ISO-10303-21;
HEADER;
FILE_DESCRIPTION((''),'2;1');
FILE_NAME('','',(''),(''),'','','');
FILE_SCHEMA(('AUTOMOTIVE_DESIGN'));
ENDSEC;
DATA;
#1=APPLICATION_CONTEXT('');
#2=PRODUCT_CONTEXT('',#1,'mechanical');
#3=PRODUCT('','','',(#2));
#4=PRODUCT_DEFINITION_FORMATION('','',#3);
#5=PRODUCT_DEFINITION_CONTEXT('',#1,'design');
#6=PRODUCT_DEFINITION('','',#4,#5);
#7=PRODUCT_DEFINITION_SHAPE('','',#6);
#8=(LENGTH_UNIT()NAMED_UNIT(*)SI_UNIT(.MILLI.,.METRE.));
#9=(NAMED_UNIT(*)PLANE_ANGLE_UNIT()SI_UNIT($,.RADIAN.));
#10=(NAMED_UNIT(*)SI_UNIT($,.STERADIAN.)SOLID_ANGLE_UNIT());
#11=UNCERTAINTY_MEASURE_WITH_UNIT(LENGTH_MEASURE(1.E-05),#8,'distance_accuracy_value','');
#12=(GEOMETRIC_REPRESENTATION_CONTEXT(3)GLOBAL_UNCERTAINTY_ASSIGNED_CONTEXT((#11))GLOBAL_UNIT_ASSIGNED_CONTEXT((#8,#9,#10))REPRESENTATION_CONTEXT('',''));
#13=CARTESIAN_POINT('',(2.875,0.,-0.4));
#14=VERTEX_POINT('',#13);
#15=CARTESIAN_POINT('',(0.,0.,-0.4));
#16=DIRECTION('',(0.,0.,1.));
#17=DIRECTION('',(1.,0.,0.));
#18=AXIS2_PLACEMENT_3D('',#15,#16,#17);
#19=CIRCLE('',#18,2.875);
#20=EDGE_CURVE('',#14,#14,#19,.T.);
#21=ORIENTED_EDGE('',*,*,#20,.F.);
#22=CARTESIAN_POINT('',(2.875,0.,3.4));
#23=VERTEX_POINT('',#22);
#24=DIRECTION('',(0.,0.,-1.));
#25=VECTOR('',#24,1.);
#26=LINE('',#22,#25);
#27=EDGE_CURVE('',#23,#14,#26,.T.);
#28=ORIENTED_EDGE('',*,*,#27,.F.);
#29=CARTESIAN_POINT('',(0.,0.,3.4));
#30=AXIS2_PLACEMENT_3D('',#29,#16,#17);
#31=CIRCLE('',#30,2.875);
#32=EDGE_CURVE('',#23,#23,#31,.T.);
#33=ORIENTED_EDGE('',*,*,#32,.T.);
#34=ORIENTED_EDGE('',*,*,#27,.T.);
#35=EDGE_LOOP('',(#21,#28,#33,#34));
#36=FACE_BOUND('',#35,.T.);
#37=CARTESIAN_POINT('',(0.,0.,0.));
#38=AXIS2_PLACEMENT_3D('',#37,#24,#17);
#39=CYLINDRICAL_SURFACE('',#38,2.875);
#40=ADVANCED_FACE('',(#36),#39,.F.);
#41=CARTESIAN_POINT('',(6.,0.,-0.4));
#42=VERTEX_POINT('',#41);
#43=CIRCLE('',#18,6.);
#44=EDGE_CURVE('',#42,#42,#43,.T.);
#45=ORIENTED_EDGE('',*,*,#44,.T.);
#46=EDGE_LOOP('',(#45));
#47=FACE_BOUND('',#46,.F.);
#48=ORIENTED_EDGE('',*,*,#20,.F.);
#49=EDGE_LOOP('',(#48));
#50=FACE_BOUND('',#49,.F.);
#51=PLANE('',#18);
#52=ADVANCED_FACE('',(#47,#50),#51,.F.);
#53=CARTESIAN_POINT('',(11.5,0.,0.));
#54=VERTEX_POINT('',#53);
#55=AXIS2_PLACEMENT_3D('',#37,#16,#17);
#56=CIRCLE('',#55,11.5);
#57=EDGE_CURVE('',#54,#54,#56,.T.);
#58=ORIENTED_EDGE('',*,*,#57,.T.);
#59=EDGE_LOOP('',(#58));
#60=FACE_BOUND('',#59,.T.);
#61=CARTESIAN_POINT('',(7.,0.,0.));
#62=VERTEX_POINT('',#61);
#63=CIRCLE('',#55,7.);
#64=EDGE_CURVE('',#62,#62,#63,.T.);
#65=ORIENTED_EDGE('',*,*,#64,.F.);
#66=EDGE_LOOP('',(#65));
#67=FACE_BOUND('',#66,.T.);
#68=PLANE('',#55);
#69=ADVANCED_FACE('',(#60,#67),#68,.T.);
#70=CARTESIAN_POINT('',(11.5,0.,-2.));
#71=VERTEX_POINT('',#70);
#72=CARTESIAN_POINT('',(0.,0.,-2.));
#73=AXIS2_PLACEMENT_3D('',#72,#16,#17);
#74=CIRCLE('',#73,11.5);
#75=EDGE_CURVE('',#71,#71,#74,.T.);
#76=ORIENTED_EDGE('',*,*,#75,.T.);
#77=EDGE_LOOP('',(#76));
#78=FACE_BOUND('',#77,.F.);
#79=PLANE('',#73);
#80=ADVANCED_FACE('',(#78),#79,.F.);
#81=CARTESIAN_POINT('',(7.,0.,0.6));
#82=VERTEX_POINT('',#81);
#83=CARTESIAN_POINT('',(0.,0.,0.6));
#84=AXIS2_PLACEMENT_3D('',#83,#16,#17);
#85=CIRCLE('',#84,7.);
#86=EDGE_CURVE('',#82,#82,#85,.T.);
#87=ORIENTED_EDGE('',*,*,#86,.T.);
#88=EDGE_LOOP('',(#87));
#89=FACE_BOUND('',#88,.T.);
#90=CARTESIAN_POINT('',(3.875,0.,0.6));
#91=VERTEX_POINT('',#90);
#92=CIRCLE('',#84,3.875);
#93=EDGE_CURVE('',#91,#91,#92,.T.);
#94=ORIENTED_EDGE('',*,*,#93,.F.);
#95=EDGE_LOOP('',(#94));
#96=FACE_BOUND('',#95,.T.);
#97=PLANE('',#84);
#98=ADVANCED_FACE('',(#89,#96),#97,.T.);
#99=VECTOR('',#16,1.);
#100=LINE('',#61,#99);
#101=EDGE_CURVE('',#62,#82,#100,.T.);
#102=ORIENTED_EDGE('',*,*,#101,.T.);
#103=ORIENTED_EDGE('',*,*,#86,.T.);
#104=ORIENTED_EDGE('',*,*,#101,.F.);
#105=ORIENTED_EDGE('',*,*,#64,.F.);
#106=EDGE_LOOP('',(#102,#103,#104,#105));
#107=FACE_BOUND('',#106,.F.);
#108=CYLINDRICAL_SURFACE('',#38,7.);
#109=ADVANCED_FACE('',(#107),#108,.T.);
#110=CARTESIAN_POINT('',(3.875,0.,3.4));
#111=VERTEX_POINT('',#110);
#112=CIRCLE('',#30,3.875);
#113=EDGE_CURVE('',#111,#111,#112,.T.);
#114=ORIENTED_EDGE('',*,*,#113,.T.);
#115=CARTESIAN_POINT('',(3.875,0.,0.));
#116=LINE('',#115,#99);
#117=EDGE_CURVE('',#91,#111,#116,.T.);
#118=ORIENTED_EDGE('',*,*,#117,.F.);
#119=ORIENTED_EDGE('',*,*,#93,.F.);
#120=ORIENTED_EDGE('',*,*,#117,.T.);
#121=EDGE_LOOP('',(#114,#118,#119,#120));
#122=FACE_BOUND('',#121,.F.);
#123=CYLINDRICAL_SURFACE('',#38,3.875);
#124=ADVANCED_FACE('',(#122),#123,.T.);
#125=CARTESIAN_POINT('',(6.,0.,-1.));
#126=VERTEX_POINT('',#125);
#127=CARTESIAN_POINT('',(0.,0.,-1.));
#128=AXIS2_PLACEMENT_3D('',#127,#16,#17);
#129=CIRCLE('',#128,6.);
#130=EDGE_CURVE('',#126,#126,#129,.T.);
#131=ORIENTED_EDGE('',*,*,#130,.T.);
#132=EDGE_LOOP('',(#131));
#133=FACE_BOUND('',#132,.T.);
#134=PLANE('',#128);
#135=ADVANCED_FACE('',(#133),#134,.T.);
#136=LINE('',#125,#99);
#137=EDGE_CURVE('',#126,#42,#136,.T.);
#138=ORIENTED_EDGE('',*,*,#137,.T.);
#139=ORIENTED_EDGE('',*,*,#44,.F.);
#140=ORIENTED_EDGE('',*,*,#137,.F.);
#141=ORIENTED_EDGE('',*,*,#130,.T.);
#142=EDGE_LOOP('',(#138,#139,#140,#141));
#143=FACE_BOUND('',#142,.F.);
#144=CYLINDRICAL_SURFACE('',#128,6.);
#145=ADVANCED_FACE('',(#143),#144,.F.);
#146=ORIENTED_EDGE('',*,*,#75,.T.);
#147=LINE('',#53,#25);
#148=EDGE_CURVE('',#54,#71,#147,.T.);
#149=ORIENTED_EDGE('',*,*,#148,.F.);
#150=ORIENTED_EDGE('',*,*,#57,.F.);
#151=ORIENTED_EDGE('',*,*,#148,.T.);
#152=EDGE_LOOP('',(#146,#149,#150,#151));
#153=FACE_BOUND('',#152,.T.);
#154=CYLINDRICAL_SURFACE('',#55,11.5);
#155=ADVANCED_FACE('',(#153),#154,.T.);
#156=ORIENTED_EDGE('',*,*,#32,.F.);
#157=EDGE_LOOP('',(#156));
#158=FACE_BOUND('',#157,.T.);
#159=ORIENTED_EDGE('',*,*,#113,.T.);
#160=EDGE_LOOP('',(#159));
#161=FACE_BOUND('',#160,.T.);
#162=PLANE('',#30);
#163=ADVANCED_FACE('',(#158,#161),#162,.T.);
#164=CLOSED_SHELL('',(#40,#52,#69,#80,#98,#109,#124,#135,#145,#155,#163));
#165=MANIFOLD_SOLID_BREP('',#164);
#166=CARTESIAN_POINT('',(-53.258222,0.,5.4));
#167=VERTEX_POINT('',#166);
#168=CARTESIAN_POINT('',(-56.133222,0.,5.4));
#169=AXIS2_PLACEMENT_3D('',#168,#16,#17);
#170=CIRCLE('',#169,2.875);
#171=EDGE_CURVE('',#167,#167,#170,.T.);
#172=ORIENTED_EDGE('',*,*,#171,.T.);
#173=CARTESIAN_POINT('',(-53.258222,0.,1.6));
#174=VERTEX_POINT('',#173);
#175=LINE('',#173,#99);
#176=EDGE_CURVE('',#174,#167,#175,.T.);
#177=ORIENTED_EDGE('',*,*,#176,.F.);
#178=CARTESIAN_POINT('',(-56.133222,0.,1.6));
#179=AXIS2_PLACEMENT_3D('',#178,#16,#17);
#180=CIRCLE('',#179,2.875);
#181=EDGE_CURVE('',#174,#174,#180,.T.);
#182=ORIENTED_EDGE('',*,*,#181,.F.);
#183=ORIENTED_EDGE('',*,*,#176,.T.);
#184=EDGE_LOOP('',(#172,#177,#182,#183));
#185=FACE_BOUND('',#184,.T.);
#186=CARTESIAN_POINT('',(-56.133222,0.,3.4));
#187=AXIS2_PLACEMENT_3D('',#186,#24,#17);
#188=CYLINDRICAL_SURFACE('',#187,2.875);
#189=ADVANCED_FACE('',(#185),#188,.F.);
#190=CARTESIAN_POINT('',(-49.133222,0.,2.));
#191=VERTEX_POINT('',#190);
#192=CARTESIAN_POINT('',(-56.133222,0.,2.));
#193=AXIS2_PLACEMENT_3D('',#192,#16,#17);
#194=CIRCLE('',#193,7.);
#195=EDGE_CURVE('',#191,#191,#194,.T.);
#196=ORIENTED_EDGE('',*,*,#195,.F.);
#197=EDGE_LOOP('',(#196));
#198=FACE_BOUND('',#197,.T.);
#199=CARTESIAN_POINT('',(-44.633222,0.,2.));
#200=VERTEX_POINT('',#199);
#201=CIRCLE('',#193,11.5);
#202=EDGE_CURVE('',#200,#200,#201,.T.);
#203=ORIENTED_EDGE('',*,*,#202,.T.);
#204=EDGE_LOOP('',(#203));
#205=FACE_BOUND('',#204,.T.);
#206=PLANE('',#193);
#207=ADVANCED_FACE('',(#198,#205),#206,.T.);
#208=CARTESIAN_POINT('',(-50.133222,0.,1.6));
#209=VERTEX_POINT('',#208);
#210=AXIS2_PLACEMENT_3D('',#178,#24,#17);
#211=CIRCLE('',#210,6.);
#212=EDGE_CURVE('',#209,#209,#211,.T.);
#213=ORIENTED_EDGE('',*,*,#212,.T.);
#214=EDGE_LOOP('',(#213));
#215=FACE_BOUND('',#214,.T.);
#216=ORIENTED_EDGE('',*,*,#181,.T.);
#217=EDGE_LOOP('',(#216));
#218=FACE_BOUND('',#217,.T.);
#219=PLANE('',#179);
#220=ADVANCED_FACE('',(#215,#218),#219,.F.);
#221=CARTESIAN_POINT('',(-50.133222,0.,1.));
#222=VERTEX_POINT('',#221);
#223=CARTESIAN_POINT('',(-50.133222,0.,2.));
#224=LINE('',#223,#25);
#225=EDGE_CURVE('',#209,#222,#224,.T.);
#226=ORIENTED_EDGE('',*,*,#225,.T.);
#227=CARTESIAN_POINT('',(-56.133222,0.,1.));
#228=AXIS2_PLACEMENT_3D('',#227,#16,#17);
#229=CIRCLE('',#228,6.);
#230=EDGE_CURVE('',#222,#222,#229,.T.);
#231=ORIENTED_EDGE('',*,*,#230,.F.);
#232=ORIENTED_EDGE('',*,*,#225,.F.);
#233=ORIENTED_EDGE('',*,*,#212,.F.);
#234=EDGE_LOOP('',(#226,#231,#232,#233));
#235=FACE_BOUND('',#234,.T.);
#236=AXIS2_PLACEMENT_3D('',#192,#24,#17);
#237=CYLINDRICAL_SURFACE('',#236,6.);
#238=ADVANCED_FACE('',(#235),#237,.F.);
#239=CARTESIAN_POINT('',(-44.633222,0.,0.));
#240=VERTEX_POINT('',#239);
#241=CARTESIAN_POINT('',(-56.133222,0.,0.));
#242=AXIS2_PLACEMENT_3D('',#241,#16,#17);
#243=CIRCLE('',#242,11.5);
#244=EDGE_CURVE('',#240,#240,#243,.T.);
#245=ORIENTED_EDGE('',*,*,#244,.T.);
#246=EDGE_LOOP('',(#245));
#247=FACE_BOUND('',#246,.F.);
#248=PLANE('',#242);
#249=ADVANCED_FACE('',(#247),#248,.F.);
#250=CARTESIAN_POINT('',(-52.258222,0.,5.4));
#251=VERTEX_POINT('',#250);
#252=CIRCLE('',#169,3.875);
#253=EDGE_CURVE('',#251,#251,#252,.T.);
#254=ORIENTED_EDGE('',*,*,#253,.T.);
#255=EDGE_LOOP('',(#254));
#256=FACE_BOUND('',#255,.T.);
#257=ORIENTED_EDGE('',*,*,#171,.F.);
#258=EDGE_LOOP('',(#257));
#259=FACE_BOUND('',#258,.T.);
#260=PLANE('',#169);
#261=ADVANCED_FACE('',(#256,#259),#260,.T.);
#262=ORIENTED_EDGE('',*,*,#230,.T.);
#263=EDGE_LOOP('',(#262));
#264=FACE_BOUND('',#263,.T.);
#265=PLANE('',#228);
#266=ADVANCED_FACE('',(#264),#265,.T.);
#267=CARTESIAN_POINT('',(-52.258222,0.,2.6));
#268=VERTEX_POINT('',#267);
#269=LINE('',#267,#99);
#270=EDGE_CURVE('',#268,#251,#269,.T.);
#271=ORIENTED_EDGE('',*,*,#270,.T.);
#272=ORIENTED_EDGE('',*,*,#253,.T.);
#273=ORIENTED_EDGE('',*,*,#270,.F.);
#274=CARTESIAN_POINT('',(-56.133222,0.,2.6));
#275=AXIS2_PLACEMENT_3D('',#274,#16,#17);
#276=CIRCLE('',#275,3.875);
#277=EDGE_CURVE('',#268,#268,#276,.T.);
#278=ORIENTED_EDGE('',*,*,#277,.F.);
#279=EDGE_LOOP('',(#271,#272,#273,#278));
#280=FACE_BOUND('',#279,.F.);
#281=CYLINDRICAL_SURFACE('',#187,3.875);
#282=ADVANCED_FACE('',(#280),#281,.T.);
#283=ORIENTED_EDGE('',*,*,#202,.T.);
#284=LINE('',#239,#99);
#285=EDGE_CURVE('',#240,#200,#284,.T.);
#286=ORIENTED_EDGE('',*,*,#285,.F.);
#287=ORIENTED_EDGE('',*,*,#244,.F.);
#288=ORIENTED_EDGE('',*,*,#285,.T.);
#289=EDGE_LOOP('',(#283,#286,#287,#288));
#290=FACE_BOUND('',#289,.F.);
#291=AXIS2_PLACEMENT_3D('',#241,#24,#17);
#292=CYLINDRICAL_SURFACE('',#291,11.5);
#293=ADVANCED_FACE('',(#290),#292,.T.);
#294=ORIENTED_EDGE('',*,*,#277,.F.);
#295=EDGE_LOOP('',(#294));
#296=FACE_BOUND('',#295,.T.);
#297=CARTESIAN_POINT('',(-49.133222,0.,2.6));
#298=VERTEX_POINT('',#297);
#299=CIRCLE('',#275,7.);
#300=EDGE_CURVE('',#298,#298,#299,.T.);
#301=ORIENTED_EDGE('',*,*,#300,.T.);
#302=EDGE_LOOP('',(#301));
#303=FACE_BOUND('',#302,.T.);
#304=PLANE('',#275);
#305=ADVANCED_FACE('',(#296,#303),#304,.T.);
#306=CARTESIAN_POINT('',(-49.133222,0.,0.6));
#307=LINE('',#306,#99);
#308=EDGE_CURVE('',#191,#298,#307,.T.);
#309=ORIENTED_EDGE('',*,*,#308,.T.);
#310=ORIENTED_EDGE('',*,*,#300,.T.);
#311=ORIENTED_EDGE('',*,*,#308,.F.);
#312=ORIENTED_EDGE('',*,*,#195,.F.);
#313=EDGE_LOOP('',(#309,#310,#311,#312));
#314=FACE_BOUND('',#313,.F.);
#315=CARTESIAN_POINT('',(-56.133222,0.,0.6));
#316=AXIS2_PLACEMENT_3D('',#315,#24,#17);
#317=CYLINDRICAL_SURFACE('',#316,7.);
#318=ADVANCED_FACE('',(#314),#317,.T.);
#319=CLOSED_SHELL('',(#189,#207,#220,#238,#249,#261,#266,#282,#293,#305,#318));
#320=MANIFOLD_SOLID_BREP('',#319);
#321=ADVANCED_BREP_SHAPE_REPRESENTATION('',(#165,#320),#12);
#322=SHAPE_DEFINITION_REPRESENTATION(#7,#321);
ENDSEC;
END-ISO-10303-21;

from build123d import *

# Parameters (mm, degrees)
F0_R        = 3.875
F1_DEPTH    = 3.4
F0_R_2      = 7
F2_DEPTH    = 0.6
F0_R_3      = 11.5
F3_DEPTH    = 2
F4_T        = 1
F5_R        = 3.875
F6_DEPTH    = 3.4
F5_R_2      = 7
F7_DEPTH    = 0.6
F6_FACE_R   = 3.875
F7_FACE_R   = 7
F7_FACE_R_2 = 3.875
F5_R_3      = 11.5
F8_DEPTH    = 2
F9_T        = 1


# Not quite as in the source:
# - a shell that OpenCascade refuses in one call is made with other operations: the cavity is built on its own and cut out


with BuildPart() as f1:
    # F0 (on Top) → F1 (new body)
    with BuildSketch(Plane.XY):
        Circle(F0_R)
    extrude(amount=F1_DEPTH)

    # F0 (on Top) → F2 (join)
    with BuildSketch(Plane.XY):
        Circle(F0_R_2)
        Circle(F0_R, mode=Mode.SUBTRACT)
    extrude(amount=F2_DEPTH)

    # F0 (on Top) → F3 (join)
    with BuildSketch(Plane.XY):
        Circle(F0_R_3)
        Circle(F0_R_2, mode=Mode.SUBTRACT)
        Circle(F0_R_2)
        Circle(F0_R, mode=Mode.SUBTRACT)
        Circle(F0_R)
    extrude(amount=-F3_DEPTH)

    # F4: shell of thickness 1, made by hand


with BuildPart() as f4_core1:
    # F4_t2: copy of F1
    add(f1.part)

    # the walls: a layer under each face that stays
    f4_faces = [f4_core1.faces().sort_by_distance(p)[0] for p in [
        (-11.5, 0, -1),
        (-7.6666666667, -7.6666666667, 0),
        (0, 0, -2),
        (-7, 0, 0.3),
        (-4.6666666667, -4.6666666667, 0.6),
        (-3.875, 0, 2),
    ]]
    thicken(f4_faces, amount=-F4_T, mode=Mode.SUBTRACT)

    # F4_s3 → F4_t4 (revolve, cut)
    with BuildSketch(Plane.XZ):
        Polygon((7.01, 0.01), (7, -1), (6, -1), (6, 0), align=None)
    revolve(axis=Axis((0, 0, 0), (0, 0, 1)), mode=Mode.SUBTRACT)

    # F4_s5 → F4_t6 (revolve, cut)
    with BuildSketch(Plane.XZ):
        Polygon((3.885, 0.61), (3.875, -0.4), (2.875, -0.4), (2.875, 0.6), align=None)
    revolve(axis=Axis((0, 0, 0.6), (0, 0, 1)), mode=Mode.SUBTRACT)


with BuildPart() as f1_1:
    add(f1.part)

    # what is left inside the walls is the cavity
    f4_cavity = [f4_core1.part.solids().sort_by_distance(p)[0] for p in [
        (0, -2, -0.99),
    ]]
    add(f4_cavity, mode=Mode.SUBTRACT)


with BuildPart() as f6:
    # F5 (on Top) → F6 (new body)
    with BuildSketch(Plane.XY):
        with Locations((-56.1332218349, 0)):
            Circle(F5_R)
    extrude(amount=F6_DEPTH)

    # F5 (on Top) → F7 (join)
    with BuildSketch(Plane.XY):
        with Locations((-56.1332218349, 0)):
            Circle(F5_R_2)
        with Locations((-56.1332218349, 0)):
            Circle(F5_R, mode=Mode.SUBTRACT)
    extrude(amount=F7_DEPTH)

    # F6_face (on face) + F7_face (on face) + F5 (on Top) → F8 (join)
    with BuildSketch(Plane(origin=(-56.1332218349, 0, 3.4), x_dir=(1, 0, 0), z_dir=(0, 0, 1))):
        Circle(F6_FACE_R)
    with BuildSketch(Plane(origin=(-56.1332218349, 0, 0.6), x_dir=(1, 0, 0), z_dir=(0, 0, 1))):
        Circle(F7_FACE_R)
        Circle(F7_FACE_R_2, mode=Mode.SUBTRACT)
    with BuildSketch(Plane.XY):
        with Locations((-56.1332218349, 0)):
            Circle(F5_R_3)
        with Locations((-56.1332218349, 0)):
            Circle(F5_R_2, mode=Mode.SUBTRACT)
    extrude(amount=F8_DEPTH)

    # F9: shell of thickness 1, made by hand


with BuildPart() as f9_core1:
    # F9_t2: copy of F6
    add(f6.part)

    # the walls: a layer under each face that stays
    f9_faces = [f9_core1.faces().sort_by_distance(p)[0] for p in [
        (-60.0082218349, 0, 4),
        (-60.7998885016, -4.6666666667, 2.6),
        (-63.1332218349, 0, 2.3),
        (-63.7998885016, -7.6666666667, 2),
        (-67.6332218349, 0, 1),
        (-56.1332218349, 0, 0),
    ]]
    thicken(f9_faces, amount=-F9_T, mode=Mode.SUBTRACT)

    # F9_s3 → F9_t4 (revolve, cut)
    with BuildSketch(Plane.XZ):
        Polygon((-52.2482218349, 2.61), (-53.2582218349, 2.6), (-53.2582218349, 1.6), (-52.2582218349, 1.6), align=None)
    revolve(axis=Axis((-56.1332218349, 0, 2.6), (0, 0, 1)), mode=Mode.SUBTRACT)

    # F9_s5 → F9_t6 (revolve, cut)
    with BuildSketch(Plane.XZ):
        Polygon((-49.1232218349, 2.01), (-50.1332218349, 2), (-50.1332218349, 1), (-49.1332218349, 1), align=None)
    revolve(axis=Axis((-56.1332218349, 0, 2), (0, 0, 1)), mode=Mode.SUBTRACT)


with BuildPart() as f6_1:
    add(f6.part)

    # what is left inside the walls is the cavity
    f9_cavity = [f9_core1.part.solids().sort_by_distance(p)[0] for p in [
        (-56.133222, -2, 1.01),
    ]]
    add(f9_cavity, mode=Mode.SUBTRACT)


solid = Compound([f1_1.part, f6_1.part])
